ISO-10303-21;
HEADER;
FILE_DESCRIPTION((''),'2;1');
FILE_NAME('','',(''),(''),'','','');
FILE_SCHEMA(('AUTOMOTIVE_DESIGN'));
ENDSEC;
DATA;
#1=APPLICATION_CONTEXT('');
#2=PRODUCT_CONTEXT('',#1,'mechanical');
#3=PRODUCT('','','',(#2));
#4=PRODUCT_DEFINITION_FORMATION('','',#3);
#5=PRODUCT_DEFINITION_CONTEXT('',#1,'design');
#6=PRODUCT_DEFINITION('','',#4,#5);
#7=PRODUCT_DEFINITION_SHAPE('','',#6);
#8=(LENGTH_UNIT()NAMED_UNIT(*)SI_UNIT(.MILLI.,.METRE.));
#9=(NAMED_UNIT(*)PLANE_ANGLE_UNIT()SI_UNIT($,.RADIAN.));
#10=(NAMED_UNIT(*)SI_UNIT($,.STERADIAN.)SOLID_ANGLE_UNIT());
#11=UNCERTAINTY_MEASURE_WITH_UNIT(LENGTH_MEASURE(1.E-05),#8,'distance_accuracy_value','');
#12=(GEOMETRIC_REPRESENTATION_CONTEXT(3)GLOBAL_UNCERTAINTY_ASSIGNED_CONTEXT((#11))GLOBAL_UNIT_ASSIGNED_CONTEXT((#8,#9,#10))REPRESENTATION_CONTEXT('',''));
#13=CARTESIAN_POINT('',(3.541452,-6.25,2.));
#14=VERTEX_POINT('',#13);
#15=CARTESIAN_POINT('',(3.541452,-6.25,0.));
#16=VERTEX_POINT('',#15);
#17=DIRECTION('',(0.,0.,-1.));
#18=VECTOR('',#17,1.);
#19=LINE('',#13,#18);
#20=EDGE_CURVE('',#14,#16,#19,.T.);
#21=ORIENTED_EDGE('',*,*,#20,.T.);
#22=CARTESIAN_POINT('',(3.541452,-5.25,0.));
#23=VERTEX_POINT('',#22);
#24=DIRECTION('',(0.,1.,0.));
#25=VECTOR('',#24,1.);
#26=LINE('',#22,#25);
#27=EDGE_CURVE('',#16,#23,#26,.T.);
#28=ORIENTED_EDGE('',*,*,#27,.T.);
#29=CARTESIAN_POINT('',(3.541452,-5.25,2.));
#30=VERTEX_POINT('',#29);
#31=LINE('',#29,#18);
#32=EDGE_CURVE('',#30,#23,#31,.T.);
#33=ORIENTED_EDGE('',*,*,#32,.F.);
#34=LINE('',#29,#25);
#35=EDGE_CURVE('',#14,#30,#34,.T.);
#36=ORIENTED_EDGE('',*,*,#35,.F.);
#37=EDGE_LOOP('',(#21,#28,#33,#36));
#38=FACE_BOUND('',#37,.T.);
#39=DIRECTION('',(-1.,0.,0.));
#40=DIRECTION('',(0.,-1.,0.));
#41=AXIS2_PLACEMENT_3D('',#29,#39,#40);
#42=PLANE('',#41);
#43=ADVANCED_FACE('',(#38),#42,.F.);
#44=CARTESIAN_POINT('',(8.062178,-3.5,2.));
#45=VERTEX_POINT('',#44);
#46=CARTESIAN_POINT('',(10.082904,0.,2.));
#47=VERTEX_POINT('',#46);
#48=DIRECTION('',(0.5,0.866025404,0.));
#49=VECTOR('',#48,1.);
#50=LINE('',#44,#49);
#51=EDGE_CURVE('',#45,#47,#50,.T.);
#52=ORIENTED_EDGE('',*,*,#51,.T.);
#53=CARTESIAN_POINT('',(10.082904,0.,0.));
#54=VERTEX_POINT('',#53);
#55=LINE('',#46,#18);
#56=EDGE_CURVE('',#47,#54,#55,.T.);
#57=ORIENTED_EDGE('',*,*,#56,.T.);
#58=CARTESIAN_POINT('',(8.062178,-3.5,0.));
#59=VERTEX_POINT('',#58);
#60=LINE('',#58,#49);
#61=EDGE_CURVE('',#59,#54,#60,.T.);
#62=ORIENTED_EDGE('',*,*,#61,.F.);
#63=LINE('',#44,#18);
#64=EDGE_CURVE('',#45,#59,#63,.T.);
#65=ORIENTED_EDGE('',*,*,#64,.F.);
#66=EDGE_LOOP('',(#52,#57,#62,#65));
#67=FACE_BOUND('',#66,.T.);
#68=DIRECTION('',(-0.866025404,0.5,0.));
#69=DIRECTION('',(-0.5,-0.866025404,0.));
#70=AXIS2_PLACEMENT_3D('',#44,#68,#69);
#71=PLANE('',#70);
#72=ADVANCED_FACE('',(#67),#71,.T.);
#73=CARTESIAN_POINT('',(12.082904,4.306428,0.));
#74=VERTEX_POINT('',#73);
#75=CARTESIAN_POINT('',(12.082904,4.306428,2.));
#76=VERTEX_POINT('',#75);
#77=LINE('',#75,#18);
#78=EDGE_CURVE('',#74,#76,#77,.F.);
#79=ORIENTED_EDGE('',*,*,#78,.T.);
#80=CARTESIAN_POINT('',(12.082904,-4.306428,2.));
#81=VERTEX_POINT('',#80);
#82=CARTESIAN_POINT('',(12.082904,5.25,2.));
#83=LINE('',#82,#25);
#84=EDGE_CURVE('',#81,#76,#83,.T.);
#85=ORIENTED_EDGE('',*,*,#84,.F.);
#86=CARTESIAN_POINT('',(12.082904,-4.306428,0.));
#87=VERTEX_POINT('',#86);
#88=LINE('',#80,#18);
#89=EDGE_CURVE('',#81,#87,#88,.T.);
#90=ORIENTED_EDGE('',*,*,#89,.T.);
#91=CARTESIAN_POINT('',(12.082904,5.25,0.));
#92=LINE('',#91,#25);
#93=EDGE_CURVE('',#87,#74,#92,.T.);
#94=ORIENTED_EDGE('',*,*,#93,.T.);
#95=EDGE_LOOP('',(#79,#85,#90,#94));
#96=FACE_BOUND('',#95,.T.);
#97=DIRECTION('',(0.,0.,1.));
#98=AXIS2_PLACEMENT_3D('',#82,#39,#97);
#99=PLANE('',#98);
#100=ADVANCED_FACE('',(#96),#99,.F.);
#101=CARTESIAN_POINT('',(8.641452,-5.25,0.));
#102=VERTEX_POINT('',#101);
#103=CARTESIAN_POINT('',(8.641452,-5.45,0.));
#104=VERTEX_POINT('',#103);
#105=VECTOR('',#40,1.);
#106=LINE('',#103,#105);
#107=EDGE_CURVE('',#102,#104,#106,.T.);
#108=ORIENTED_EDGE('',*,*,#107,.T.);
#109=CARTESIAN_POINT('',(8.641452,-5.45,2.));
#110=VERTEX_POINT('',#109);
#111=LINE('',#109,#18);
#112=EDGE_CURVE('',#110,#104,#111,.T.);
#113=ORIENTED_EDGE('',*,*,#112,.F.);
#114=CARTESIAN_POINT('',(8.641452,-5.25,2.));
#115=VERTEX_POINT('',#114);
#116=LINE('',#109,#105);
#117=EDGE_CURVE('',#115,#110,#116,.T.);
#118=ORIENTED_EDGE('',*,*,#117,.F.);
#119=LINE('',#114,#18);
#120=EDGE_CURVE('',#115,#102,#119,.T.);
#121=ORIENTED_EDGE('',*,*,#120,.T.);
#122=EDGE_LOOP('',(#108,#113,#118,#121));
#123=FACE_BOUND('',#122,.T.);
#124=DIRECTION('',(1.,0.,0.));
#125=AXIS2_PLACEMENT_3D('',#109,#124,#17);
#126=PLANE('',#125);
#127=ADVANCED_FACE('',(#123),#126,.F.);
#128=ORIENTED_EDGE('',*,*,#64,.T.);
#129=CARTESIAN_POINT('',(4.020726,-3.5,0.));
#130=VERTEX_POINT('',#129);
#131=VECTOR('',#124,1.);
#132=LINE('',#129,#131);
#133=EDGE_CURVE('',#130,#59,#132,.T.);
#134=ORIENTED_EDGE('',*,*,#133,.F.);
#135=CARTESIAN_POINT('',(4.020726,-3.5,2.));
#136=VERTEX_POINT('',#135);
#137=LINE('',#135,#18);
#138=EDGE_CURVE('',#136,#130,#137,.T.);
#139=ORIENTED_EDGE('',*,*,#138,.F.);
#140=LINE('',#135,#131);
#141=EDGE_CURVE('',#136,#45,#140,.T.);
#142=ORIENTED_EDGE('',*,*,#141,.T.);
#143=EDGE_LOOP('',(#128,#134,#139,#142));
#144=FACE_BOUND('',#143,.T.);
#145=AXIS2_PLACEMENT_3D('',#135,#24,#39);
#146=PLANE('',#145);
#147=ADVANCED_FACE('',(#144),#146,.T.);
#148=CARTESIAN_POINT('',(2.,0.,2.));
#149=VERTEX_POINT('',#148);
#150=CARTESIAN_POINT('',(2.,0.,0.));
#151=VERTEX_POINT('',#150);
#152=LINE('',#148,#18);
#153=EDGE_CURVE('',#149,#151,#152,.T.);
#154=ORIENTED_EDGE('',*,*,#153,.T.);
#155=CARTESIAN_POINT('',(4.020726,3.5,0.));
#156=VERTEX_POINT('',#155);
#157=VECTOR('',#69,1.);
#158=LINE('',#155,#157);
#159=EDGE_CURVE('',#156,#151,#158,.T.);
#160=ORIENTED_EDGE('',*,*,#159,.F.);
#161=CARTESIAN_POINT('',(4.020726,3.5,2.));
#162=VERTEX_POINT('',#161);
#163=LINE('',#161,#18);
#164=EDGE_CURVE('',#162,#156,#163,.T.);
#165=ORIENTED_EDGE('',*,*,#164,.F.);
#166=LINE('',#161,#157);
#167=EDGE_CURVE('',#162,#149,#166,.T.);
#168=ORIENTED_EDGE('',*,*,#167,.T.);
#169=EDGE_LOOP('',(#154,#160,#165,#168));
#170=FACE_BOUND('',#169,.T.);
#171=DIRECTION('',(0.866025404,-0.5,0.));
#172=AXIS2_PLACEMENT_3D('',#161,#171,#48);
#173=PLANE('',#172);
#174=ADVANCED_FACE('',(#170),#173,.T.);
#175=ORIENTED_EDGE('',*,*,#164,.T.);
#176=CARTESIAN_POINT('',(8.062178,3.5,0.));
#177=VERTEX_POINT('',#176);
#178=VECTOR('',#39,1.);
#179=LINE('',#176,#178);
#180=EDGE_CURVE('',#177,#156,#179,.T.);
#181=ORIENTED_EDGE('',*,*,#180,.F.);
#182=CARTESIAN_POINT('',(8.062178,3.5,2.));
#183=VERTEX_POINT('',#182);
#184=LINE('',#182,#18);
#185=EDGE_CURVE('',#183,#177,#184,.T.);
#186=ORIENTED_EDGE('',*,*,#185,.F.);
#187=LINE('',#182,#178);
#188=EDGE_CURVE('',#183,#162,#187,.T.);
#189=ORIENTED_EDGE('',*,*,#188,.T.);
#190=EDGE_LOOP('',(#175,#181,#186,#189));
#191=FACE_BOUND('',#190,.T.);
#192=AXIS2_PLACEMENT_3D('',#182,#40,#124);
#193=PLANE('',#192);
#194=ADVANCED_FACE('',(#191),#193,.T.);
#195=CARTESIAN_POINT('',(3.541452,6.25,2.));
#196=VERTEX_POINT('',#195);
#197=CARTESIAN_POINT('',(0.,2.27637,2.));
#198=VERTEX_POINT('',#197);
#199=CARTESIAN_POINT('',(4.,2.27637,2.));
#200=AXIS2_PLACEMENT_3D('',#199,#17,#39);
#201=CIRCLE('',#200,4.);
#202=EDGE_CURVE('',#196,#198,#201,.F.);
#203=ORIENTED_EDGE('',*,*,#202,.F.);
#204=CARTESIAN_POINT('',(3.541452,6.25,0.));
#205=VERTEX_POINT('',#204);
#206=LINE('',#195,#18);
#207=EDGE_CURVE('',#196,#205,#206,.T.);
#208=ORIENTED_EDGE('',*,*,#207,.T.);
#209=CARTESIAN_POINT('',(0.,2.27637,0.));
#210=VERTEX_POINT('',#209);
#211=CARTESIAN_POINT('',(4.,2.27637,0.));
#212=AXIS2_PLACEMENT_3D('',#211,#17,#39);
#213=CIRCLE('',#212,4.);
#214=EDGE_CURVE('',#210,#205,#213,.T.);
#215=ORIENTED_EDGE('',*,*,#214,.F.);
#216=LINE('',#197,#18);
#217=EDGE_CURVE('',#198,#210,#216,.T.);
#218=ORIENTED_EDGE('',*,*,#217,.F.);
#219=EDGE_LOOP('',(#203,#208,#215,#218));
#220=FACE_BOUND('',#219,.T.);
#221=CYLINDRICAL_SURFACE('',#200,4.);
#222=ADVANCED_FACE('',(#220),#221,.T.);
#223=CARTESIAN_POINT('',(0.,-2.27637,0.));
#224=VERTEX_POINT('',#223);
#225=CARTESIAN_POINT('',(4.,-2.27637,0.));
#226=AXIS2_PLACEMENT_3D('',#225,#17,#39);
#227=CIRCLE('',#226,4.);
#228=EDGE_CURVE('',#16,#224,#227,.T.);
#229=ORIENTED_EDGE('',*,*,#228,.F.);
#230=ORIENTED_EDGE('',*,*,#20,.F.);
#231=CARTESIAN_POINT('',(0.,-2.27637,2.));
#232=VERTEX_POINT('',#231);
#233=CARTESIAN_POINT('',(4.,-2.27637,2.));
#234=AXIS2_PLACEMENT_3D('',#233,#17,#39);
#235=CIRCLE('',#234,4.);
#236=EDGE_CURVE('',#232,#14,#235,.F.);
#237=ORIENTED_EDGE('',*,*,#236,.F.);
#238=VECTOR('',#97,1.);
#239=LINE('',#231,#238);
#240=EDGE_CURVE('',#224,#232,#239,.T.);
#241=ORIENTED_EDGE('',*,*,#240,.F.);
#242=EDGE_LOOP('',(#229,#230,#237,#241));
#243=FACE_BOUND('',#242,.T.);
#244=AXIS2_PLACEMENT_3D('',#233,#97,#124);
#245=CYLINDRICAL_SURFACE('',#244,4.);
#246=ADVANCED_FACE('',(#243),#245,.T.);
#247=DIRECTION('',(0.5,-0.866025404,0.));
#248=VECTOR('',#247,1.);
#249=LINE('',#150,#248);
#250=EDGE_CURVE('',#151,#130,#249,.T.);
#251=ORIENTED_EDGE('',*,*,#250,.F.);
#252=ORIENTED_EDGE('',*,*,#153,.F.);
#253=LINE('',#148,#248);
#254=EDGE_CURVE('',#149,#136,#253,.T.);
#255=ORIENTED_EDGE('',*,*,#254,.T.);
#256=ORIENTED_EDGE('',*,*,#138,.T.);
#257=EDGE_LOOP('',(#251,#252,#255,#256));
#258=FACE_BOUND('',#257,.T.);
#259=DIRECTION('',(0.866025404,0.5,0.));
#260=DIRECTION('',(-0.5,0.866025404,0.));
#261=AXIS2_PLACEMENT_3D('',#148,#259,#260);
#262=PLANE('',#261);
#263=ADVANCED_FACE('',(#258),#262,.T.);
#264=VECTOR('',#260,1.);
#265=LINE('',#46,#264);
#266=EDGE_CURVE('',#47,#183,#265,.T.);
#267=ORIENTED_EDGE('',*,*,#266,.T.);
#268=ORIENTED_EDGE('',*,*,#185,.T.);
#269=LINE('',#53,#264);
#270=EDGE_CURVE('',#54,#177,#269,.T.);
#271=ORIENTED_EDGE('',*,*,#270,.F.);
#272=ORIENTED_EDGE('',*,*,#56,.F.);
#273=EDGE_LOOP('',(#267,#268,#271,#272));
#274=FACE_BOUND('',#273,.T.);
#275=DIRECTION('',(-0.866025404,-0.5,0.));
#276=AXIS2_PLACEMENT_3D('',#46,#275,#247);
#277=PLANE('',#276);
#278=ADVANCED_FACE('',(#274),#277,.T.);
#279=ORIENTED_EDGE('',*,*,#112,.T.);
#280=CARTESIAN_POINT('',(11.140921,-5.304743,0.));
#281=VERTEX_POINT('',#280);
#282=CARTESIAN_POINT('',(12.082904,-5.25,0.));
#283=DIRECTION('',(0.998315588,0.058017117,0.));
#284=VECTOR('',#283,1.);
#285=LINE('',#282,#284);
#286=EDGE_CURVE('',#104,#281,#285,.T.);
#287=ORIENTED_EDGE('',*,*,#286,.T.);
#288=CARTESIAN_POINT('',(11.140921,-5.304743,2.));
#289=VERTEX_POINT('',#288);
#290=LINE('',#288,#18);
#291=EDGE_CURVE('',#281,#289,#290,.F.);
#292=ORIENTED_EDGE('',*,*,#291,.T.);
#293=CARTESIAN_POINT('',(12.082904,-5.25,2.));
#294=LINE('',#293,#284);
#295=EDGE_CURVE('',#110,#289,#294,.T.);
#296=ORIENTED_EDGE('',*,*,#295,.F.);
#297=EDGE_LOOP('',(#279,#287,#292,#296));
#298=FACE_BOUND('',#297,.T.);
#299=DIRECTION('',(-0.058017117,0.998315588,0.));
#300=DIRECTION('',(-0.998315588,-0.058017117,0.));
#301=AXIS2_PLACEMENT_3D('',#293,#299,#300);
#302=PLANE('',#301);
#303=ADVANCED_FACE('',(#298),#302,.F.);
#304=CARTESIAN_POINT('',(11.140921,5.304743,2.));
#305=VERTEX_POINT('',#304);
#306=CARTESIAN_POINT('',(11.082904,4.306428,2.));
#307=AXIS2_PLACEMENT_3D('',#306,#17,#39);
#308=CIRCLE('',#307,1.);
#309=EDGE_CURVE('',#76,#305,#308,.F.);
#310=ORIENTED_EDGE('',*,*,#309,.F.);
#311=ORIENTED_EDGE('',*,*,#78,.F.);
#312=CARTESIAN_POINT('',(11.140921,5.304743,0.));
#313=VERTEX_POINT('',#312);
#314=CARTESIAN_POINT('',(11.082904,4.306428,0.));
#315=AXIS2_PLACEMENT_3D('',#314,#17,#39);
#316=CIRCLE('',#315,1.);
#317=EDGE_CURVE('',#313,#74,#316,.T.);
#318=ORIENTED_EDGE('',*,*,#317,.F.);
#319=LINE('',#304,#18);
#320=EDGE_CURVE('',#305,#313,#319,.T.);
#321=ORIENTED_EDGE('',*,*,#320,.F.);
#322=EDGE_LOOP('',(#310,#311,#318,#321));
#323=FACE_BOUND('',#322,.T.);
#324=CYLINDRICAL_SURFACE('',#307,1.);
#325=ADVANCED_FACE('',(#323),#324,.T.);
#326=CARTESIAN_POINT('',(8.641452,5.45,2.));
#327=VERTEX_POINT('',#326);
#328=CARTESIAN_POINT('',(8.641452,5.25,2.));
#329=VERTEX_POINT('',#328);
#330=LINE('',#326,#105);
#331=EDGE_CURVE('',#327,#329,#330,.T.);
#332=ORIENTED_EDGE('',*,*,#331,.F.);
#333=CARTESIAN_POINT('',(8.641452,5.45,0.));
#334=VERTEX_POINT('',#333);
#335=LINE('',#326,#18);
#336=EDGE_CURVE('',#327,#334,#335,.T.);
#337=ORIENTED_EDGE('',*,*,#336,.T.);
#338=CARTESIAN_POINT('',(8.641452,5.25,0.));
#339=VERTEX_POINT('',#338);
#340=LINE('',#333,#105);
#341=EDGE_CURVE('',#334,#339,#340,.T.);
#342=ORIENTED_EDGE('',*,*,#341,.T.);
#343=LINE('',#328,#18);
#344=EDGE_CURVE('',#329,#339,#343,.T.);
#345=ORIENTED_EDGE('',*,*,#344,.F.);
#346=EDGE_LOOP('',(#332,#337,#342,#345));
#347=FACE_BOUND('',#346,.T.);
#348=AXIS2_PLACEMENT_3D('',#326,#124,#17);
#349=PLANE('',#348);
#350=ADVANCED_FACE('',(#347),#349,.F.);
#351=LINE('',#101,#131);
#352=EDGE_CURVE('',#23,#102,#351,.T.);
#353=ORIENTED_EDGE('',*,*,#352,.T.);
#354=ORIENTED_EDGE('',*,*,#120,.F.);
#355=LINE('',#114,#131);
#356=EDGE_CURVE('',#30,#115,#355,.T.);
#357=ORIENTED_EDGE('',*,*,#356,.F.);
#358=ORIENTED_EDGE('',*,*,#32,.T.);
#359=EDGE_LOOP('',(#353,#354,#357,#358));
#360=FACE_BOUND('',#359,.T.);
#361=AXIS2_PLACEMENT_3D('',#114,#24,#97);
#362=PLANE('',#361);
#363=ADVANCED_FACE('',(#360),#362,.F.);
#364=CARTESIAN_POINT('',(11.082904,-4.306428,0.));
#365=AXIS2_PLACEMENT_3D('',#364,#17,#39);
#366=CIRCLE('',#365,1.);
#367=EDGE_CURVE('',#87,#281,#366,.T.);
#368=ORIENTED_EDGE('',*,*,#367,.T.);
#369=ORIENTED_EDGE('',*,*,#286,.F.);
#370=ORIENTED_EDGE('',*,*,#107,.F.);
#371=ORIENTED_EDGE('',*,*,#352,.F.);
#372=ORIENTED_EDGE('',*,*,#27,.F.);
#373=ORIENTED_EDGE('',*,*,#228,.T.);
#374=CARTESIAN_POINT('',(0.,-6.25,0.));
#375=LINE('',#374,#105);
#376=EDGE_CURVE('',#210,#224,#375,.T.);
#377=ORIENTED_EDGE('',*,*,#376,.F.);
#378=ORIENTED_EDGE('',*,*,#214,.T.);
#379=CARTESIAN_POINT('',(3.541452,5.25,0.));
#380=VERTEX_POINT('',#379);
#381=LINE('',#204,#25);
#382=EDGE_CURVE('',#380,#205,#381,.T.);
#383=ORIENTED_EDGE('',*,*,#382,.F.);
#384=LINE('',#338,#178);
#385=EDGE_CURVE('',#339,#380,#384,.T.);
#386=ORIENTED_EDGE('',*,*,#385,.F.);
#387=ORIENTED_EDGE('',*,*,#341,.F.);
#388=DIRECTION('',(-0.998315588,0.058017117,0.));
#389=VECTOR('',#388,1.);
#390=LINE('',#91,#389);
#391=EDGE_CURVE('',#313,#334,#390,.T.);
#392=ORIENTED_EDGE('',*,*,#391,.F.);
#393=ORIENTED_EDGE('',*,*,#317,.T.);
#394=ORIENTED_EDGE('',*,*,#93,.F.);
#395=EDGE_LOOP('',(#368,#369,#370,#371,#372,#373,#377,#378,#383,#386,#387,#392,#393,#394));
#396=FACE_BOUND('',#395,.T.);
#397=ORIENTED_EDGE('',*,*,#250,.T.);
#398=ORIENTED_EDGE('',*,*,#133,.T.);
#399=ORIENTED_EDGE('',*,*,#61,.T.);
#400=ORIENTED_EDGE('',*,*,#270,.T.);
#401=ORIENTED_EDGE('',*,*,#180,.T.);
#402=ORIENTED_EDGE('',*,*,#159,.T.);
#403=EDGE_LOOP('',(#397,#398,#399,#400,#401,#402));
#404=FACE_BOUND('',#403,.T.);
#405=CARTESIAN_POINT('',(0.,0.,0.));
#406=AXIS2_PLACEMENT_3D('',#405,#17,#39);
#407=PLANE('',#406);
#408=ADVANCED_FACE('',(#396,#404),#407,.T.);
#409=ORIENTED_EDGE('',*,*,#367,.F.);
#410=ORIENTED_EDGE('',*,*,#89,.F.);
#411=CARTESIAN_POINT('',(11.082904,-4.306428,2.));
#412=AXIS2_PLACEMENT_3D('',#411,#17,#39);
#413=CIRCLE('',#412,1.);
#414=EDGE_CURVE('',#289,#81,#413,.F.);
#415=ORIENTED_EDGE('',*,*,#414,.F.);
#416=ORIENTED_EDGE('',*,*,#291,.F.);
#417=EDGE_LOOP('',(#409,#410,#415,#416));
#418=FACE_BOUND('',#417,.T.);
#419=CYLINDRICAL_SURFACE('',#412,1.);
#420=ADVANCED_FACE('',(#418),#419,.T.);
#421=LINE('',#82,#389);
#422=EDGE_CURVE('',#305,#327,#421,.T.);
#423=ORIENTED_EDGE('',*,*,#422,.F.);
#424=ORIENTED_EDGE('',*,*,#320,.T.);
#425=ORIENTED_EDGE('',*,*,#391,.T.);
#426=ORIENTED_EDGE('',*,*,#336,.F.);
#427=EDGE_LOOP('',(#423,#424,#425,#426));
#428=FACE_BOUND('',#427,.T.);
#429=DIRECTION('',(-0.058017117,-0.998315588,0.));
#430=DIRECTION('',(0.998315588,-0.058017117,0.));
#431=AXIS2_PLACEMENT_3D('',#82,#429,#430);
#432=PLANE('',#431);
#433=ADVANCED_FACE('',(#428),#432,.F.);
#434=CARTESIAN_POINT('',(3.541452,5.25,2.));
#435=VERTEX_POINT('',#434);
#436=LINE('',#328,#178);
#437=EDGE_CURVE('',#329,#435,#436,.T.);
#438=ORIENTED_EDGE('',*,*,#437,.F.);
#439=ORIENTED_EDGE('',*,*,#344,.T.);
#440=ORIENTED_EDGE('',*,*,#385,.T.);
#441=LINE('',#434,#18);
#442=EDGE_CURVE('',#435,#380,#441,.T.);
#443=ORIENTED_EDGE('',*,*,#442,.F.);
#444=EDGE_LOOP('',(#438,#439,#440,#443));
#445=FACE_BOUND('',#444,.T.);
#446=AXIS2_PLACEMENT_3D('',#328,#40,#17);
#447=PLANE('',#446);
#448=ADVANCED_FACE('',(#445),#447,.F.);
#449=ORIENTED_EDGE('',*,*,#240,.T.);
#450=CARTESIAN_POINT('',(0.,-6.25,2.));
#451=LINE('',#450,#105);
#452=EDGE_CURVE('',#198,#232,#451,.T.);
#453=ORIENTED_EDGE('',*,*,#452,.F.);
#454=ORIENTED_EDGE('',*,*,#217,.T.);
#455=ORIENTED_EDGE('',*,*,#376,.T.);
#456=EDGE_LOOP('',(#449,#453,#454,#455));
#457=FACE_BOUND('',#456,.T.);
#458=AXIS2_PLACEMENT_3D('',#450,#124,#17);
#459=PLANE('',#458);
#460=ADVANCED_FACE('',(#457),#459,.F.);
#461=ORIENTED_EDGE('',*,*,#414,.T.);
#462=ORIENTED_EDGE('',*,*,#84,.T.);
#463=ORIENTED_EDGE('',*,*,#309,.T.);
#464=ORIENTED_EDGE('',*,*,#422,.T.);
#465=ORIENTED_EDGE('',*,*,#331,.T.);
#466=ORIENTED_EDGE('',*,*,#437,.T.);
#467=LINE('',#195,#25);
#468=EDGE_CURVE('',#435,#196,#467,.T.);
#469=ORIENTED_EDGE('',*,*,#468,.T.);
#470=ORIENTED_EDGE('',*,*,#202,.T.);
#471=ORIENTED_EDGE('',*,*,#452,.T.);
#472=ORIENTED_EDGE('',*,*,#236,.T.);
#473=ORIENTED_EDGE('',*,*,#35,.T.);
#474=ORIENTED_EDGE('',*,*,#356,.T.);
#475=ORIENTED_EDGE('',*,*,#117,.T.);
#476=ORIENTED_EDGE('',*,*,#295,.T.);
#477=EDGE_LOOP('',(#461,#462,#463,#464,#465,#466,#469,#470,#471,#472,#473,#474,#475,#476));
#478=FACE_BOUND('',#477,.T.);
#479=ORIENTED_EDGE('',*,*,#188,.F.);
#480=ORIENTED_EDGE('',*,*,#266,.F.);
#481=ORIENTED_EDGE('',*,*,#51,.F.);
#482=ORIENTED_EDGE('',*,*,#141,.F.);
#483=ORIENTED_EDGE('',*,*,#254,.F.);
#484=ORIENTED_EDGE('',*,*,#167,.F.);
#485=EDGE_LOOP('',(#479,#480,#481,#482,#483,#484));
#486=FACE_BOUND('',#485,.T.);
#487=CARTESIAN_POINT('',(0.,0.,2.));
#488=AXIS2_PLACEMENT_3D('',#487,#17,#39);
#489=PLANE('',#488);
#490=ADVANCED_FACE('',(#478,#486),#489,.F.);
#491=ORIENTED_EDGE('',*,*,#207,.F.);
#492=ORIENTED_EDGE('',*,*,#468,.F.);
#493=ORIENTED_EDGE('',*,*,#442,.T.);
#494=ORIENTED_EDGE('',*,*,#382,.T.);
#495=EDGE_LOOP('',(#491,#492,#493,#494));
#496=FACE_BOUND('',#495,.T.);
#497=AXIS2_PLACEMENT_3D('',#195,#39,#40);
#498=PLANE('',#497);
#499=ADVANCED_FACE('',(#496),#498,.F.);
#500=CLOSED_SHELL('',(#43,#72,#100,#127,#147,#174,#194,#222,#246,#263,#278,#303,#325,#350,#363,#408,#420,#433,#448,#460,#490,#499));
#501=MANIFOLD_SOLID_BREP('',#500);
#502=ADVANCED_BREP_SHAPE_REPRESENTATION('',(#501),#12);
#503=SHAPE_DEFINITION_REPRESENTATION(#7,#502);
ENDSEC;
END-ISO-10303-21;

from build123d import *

# Parameters (mm, degrees)
BOSS_EXTRU_1_DEPTH = 2
CONG_1_R           = 4
CONG_2_R           = 1


with BuildPart() as part:
    # Esquisse1 → Boss.-Extru.1 (new body)
    with BuildSketch(Plane.XY):
        Polygon((0, 6.25), (3.541451884, 6.25), (3.541451884, 5.25), (8.641451884, 5.25), (8.641451884, 5.45), (12.082903769, 5.25), (12.082903769, -5.25), (8.641451884, -5.45), (8.641451884, -5.25), (3.541451884, -5.25), (3.541451884, -6.25), (0, -6.25), align=None)
        Polygon((2, 0), (4.020725942, -3.5), (8.062177826, -3.5), (10.082903769, 0), (8.062177826, 3.5), (4.020725942, 3.5), align=None, mode=Mode.SUBTRACT)
    extrude(amount=BOSS_EXTRU_1_DEPTH)

    # Congé1
    # the kernel refuses this fillet: 4 mm, written as the material it takes off along each edge
    with BuildSketch(Plane(origin=(0, -6.25, -9.934074449), x_dir=(1, 0, 0), z_dir=(0, 0, 1))) as cong_1_piece_1:
        with BuildLine():
            CenterArc((4, 3.97362978), CONG_1_R, 180, 83.417310117)
            Line((0, 3.97362978), (-0.08, 3.97362978))
            Line((-0.08, 3.97362978), (-0.08, 0))
            Line((-0.08, 0), (0, -0.08))
            ThreePointArc((0, -0.08), (1.770725942, -0.08), (3.532280922, -0.079472596))
            Line((3.532280922, -0.079472596), (3.541451884, 0))
        make_face()
    extrude(amount=21.868148898, mode=Mode.SUBTRACT)
    with BuildSketch(Plane(origin=(0, 6.25, -9.934074449), x_dir=(1, 0, 0), z_dir=(0, 0, 1))) as cong_1_piece_2:
        with BuildLine():
            CenterArc((4, -3.97362978), CONG_1_R, 96.582689883, 83.417310117)
            Line((0, -3.97362978), (-0.08, -3.97362978))
            Line((-0.08, -3.97362978), (-0.08, 0))
            Line((-0.08, 0), (0, 0.08))
            ThreePointArc((0, 0.08), (1.770725942, 0.08), (3.532280922, 0.079472596))
            Line((3.532280922, 0.079472596), (3.541451884, 0))
        make_face()
    extrude(amount=21.868148898, mode=Mode.SUBTRACT)

    # Congé2
    cong_2_edges = [part.edges().sort_by_distance(p)[0] for p in [
        (12.082903769, 5.25, 1),
        (12.082903769, -5.25, 1),
    ]]
    fillet(cong_2_edges, radius=CONG_2_R)


solid = part.part
